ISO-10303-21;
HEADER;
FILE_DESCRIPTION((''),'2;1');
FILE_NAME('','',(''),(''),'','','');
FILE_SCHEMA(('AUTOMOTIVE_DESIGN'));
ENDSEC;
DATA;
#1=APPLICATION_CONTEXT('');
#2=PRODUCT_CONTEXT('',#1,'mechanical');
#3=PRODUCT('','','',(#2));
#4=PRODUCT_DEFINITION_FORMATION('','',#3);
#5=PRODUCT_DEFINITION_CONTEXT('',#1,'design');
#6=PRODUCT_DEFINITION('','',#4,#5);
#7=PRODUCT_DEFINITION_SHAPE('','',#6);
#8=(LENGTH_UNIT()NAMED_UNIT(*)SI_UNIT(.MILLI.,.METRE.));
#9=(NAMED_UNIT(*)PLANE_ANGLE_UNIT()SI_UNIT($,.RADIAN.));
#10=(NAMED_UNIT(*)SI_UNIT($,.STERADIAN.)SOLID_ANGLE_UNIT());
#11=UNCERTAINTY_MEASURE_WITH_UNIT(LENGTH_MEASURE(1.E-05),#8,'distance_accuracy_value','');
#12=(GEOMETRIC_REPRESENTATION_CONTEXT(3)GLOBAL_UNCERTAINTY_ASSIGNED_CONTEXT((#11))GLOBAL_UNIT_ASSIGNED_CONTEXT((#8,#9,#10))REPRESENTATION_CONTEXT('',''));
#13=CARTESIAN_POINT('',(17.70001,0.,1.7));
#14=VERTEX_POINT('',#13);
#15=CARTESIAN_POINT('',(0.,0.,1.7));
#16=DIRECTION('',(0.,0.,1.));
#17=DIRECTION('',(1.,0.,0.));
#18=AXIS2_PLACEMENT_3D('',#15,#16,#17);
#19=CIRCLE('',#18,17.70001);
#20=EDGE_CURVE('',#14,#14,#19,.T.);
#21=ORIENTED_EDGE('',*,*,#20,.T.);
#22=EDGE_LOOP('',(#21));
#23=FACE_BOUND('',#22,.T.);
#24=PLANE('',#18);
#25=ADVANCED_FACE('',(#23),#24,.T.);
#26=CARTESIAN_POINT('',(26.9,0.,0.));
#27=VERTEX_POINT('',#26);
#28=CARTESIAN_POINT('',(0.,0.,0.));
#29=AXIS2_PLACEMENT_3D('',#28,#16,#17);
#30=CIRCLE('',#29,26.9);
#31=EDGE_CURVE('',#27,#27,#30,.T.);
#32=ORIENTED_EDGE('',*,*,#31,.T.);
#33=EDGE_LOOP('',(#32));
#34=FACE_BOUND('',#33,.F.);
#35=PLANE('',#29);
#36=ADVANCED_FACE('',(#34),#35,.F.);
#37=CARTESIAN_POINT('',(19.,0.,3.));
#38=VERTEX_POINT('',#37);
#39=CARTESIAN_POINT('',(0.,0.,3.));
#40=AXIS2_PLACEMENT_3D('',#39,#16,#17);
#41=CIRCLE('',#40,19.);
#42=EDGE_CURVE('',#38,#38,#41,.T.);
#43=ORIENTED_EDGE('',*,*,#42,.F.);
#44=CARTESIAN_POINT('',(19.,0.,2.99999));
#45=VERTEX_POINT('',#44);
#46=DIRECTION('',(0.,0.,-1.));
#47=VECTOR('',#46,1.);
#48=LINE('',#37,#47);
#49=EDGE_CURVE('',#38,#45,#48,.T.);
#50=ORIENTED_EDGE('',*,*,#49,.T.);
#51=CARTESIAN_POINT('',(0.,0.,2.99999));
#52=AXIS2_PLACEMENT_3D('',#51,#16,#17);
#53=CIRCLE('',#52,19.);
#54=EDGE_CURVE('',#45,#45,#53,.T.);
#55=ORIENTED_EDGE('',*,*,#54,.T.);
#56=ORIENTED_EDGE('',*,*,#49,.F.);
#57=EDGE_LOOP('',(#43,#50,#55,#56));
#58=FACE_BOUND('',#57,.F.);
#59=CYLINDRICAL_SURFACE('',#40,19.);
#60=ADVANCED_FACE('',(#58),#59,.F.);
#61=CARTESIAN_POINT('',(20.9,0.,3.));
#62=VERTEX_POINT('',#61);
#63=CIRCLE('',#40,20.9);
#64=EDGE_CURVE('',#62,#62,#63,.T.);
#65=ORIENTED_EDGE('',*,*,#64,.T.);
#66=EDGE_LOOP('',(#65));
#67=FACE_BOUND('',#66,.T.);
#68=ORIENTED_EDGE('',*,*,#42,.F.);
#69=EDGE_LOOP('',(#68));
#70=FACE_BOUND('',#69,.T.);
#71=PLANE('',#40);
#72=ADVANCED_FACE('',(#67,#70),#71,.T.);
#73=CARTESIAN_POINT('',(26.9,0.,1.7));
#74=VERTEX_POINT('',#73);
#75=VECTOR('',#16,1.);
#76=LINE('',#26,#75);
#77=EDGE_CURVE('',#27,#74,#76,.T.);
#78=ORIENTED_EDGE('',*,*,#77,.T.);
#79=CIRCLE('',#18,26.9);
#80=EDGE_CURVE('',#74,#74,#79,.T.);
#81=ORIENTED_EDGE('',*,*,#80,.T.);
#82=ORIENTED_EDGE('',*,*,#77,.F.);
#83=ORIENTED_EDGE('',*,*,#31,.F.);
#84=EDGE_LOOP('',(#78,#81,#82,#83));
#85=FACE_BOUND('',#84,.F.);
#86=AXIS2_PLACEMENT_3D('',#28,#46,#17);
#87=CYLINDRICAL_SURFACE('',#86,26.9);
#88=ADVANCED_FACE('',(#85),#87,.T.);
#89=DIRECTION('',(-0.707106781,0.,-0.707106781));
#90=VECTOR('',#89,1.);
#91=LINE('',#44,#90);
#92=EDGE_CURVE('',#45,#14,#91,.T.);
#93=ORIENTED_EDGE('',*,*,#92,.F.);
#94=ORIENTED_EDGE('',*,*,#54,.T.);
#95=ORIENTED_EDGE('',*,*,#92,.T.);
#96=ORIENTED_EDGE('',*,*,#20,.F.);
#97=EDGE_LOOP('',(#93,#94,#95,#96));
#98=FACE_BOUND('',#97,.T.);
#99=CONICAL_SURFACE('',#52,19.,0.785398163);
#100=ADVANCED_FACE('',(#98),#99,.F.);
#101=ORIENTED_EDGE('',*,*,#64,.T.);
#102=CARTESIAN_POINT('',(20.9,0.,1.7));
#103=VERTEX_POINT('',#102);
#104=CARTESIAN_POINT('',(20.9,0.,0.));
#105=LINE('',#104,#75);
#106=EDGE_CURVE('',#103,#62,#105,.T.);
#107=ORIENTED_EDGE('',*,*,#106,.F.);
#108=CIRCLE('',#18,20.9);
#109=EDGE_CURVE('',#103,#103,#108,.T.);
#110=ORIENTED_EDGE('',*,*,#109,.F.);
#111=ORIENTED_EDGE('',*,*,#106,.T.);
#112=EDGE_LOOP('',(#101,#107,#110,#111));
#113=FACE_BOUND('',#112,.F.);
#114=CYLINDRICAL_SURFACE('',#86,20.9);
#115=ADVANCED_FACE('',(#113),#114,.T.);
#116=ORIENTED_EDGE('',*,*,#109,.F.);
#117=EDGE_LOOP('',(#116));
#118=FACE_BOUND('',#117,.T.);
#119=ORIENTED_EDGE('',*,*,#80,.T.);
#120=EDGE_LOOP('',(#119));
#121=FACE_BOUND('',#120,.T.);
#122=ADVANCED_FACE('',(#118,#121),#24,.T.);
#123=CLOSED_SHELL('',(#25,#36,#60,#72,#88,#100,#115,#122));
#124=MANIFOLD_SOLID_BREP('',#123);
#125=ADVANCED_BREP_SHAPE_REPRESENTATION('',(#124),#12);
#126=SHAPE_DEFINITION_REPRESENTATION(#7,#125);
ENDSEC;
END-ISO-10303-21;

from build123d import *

# Parameters (mm, degrees)
F0_R     = 26.9
F0_R_2   = 20.9
F1_DEPTH = 1.7
F2_DEPTH = 3
F3_R     = 19
F4_DEPTH = 1.3
F5_SIZE  = 1.29999


# Not quite as in the source:
# - a fillet or chamfer is up to 0.001 mm smaller than in the source, because OpenCascade refuses the exact size


with BuildPart() as f1:
    # F0 (on Top) → F1 (new body)
    with BuildSketch(Plane.XY):
        Circle(F0_R)
        Circle(F0_R_2, mode=Mode.SUBTRACT)
    extrude(amount=F1_DEPTH)

    # F0 (on Top) → F2 (join)
    with BuildSketch(Plane.XY):
        Circle(F0_R_2)
    extrude(amount=F2_DEPTH)

    # F3 (on face) → F4 (cut)
    with BuildSketch(Plane.XY.offset(3)):
        Circle(F3_R)
    extrude(amount=-F4_DEPTH, mode=Mode.SUBTRACT)

    # F5 (size 1.3 in the source; OpenCascade refuses exactly that, so slightly less here)
    f5_edges = [f1.edges().sort_by_distance(p)[0] for p in [
        (-19, 0, 1.7),
    ]]
    chamfer(f5_edges, length=F5_SIZE)


solid = f1.part
